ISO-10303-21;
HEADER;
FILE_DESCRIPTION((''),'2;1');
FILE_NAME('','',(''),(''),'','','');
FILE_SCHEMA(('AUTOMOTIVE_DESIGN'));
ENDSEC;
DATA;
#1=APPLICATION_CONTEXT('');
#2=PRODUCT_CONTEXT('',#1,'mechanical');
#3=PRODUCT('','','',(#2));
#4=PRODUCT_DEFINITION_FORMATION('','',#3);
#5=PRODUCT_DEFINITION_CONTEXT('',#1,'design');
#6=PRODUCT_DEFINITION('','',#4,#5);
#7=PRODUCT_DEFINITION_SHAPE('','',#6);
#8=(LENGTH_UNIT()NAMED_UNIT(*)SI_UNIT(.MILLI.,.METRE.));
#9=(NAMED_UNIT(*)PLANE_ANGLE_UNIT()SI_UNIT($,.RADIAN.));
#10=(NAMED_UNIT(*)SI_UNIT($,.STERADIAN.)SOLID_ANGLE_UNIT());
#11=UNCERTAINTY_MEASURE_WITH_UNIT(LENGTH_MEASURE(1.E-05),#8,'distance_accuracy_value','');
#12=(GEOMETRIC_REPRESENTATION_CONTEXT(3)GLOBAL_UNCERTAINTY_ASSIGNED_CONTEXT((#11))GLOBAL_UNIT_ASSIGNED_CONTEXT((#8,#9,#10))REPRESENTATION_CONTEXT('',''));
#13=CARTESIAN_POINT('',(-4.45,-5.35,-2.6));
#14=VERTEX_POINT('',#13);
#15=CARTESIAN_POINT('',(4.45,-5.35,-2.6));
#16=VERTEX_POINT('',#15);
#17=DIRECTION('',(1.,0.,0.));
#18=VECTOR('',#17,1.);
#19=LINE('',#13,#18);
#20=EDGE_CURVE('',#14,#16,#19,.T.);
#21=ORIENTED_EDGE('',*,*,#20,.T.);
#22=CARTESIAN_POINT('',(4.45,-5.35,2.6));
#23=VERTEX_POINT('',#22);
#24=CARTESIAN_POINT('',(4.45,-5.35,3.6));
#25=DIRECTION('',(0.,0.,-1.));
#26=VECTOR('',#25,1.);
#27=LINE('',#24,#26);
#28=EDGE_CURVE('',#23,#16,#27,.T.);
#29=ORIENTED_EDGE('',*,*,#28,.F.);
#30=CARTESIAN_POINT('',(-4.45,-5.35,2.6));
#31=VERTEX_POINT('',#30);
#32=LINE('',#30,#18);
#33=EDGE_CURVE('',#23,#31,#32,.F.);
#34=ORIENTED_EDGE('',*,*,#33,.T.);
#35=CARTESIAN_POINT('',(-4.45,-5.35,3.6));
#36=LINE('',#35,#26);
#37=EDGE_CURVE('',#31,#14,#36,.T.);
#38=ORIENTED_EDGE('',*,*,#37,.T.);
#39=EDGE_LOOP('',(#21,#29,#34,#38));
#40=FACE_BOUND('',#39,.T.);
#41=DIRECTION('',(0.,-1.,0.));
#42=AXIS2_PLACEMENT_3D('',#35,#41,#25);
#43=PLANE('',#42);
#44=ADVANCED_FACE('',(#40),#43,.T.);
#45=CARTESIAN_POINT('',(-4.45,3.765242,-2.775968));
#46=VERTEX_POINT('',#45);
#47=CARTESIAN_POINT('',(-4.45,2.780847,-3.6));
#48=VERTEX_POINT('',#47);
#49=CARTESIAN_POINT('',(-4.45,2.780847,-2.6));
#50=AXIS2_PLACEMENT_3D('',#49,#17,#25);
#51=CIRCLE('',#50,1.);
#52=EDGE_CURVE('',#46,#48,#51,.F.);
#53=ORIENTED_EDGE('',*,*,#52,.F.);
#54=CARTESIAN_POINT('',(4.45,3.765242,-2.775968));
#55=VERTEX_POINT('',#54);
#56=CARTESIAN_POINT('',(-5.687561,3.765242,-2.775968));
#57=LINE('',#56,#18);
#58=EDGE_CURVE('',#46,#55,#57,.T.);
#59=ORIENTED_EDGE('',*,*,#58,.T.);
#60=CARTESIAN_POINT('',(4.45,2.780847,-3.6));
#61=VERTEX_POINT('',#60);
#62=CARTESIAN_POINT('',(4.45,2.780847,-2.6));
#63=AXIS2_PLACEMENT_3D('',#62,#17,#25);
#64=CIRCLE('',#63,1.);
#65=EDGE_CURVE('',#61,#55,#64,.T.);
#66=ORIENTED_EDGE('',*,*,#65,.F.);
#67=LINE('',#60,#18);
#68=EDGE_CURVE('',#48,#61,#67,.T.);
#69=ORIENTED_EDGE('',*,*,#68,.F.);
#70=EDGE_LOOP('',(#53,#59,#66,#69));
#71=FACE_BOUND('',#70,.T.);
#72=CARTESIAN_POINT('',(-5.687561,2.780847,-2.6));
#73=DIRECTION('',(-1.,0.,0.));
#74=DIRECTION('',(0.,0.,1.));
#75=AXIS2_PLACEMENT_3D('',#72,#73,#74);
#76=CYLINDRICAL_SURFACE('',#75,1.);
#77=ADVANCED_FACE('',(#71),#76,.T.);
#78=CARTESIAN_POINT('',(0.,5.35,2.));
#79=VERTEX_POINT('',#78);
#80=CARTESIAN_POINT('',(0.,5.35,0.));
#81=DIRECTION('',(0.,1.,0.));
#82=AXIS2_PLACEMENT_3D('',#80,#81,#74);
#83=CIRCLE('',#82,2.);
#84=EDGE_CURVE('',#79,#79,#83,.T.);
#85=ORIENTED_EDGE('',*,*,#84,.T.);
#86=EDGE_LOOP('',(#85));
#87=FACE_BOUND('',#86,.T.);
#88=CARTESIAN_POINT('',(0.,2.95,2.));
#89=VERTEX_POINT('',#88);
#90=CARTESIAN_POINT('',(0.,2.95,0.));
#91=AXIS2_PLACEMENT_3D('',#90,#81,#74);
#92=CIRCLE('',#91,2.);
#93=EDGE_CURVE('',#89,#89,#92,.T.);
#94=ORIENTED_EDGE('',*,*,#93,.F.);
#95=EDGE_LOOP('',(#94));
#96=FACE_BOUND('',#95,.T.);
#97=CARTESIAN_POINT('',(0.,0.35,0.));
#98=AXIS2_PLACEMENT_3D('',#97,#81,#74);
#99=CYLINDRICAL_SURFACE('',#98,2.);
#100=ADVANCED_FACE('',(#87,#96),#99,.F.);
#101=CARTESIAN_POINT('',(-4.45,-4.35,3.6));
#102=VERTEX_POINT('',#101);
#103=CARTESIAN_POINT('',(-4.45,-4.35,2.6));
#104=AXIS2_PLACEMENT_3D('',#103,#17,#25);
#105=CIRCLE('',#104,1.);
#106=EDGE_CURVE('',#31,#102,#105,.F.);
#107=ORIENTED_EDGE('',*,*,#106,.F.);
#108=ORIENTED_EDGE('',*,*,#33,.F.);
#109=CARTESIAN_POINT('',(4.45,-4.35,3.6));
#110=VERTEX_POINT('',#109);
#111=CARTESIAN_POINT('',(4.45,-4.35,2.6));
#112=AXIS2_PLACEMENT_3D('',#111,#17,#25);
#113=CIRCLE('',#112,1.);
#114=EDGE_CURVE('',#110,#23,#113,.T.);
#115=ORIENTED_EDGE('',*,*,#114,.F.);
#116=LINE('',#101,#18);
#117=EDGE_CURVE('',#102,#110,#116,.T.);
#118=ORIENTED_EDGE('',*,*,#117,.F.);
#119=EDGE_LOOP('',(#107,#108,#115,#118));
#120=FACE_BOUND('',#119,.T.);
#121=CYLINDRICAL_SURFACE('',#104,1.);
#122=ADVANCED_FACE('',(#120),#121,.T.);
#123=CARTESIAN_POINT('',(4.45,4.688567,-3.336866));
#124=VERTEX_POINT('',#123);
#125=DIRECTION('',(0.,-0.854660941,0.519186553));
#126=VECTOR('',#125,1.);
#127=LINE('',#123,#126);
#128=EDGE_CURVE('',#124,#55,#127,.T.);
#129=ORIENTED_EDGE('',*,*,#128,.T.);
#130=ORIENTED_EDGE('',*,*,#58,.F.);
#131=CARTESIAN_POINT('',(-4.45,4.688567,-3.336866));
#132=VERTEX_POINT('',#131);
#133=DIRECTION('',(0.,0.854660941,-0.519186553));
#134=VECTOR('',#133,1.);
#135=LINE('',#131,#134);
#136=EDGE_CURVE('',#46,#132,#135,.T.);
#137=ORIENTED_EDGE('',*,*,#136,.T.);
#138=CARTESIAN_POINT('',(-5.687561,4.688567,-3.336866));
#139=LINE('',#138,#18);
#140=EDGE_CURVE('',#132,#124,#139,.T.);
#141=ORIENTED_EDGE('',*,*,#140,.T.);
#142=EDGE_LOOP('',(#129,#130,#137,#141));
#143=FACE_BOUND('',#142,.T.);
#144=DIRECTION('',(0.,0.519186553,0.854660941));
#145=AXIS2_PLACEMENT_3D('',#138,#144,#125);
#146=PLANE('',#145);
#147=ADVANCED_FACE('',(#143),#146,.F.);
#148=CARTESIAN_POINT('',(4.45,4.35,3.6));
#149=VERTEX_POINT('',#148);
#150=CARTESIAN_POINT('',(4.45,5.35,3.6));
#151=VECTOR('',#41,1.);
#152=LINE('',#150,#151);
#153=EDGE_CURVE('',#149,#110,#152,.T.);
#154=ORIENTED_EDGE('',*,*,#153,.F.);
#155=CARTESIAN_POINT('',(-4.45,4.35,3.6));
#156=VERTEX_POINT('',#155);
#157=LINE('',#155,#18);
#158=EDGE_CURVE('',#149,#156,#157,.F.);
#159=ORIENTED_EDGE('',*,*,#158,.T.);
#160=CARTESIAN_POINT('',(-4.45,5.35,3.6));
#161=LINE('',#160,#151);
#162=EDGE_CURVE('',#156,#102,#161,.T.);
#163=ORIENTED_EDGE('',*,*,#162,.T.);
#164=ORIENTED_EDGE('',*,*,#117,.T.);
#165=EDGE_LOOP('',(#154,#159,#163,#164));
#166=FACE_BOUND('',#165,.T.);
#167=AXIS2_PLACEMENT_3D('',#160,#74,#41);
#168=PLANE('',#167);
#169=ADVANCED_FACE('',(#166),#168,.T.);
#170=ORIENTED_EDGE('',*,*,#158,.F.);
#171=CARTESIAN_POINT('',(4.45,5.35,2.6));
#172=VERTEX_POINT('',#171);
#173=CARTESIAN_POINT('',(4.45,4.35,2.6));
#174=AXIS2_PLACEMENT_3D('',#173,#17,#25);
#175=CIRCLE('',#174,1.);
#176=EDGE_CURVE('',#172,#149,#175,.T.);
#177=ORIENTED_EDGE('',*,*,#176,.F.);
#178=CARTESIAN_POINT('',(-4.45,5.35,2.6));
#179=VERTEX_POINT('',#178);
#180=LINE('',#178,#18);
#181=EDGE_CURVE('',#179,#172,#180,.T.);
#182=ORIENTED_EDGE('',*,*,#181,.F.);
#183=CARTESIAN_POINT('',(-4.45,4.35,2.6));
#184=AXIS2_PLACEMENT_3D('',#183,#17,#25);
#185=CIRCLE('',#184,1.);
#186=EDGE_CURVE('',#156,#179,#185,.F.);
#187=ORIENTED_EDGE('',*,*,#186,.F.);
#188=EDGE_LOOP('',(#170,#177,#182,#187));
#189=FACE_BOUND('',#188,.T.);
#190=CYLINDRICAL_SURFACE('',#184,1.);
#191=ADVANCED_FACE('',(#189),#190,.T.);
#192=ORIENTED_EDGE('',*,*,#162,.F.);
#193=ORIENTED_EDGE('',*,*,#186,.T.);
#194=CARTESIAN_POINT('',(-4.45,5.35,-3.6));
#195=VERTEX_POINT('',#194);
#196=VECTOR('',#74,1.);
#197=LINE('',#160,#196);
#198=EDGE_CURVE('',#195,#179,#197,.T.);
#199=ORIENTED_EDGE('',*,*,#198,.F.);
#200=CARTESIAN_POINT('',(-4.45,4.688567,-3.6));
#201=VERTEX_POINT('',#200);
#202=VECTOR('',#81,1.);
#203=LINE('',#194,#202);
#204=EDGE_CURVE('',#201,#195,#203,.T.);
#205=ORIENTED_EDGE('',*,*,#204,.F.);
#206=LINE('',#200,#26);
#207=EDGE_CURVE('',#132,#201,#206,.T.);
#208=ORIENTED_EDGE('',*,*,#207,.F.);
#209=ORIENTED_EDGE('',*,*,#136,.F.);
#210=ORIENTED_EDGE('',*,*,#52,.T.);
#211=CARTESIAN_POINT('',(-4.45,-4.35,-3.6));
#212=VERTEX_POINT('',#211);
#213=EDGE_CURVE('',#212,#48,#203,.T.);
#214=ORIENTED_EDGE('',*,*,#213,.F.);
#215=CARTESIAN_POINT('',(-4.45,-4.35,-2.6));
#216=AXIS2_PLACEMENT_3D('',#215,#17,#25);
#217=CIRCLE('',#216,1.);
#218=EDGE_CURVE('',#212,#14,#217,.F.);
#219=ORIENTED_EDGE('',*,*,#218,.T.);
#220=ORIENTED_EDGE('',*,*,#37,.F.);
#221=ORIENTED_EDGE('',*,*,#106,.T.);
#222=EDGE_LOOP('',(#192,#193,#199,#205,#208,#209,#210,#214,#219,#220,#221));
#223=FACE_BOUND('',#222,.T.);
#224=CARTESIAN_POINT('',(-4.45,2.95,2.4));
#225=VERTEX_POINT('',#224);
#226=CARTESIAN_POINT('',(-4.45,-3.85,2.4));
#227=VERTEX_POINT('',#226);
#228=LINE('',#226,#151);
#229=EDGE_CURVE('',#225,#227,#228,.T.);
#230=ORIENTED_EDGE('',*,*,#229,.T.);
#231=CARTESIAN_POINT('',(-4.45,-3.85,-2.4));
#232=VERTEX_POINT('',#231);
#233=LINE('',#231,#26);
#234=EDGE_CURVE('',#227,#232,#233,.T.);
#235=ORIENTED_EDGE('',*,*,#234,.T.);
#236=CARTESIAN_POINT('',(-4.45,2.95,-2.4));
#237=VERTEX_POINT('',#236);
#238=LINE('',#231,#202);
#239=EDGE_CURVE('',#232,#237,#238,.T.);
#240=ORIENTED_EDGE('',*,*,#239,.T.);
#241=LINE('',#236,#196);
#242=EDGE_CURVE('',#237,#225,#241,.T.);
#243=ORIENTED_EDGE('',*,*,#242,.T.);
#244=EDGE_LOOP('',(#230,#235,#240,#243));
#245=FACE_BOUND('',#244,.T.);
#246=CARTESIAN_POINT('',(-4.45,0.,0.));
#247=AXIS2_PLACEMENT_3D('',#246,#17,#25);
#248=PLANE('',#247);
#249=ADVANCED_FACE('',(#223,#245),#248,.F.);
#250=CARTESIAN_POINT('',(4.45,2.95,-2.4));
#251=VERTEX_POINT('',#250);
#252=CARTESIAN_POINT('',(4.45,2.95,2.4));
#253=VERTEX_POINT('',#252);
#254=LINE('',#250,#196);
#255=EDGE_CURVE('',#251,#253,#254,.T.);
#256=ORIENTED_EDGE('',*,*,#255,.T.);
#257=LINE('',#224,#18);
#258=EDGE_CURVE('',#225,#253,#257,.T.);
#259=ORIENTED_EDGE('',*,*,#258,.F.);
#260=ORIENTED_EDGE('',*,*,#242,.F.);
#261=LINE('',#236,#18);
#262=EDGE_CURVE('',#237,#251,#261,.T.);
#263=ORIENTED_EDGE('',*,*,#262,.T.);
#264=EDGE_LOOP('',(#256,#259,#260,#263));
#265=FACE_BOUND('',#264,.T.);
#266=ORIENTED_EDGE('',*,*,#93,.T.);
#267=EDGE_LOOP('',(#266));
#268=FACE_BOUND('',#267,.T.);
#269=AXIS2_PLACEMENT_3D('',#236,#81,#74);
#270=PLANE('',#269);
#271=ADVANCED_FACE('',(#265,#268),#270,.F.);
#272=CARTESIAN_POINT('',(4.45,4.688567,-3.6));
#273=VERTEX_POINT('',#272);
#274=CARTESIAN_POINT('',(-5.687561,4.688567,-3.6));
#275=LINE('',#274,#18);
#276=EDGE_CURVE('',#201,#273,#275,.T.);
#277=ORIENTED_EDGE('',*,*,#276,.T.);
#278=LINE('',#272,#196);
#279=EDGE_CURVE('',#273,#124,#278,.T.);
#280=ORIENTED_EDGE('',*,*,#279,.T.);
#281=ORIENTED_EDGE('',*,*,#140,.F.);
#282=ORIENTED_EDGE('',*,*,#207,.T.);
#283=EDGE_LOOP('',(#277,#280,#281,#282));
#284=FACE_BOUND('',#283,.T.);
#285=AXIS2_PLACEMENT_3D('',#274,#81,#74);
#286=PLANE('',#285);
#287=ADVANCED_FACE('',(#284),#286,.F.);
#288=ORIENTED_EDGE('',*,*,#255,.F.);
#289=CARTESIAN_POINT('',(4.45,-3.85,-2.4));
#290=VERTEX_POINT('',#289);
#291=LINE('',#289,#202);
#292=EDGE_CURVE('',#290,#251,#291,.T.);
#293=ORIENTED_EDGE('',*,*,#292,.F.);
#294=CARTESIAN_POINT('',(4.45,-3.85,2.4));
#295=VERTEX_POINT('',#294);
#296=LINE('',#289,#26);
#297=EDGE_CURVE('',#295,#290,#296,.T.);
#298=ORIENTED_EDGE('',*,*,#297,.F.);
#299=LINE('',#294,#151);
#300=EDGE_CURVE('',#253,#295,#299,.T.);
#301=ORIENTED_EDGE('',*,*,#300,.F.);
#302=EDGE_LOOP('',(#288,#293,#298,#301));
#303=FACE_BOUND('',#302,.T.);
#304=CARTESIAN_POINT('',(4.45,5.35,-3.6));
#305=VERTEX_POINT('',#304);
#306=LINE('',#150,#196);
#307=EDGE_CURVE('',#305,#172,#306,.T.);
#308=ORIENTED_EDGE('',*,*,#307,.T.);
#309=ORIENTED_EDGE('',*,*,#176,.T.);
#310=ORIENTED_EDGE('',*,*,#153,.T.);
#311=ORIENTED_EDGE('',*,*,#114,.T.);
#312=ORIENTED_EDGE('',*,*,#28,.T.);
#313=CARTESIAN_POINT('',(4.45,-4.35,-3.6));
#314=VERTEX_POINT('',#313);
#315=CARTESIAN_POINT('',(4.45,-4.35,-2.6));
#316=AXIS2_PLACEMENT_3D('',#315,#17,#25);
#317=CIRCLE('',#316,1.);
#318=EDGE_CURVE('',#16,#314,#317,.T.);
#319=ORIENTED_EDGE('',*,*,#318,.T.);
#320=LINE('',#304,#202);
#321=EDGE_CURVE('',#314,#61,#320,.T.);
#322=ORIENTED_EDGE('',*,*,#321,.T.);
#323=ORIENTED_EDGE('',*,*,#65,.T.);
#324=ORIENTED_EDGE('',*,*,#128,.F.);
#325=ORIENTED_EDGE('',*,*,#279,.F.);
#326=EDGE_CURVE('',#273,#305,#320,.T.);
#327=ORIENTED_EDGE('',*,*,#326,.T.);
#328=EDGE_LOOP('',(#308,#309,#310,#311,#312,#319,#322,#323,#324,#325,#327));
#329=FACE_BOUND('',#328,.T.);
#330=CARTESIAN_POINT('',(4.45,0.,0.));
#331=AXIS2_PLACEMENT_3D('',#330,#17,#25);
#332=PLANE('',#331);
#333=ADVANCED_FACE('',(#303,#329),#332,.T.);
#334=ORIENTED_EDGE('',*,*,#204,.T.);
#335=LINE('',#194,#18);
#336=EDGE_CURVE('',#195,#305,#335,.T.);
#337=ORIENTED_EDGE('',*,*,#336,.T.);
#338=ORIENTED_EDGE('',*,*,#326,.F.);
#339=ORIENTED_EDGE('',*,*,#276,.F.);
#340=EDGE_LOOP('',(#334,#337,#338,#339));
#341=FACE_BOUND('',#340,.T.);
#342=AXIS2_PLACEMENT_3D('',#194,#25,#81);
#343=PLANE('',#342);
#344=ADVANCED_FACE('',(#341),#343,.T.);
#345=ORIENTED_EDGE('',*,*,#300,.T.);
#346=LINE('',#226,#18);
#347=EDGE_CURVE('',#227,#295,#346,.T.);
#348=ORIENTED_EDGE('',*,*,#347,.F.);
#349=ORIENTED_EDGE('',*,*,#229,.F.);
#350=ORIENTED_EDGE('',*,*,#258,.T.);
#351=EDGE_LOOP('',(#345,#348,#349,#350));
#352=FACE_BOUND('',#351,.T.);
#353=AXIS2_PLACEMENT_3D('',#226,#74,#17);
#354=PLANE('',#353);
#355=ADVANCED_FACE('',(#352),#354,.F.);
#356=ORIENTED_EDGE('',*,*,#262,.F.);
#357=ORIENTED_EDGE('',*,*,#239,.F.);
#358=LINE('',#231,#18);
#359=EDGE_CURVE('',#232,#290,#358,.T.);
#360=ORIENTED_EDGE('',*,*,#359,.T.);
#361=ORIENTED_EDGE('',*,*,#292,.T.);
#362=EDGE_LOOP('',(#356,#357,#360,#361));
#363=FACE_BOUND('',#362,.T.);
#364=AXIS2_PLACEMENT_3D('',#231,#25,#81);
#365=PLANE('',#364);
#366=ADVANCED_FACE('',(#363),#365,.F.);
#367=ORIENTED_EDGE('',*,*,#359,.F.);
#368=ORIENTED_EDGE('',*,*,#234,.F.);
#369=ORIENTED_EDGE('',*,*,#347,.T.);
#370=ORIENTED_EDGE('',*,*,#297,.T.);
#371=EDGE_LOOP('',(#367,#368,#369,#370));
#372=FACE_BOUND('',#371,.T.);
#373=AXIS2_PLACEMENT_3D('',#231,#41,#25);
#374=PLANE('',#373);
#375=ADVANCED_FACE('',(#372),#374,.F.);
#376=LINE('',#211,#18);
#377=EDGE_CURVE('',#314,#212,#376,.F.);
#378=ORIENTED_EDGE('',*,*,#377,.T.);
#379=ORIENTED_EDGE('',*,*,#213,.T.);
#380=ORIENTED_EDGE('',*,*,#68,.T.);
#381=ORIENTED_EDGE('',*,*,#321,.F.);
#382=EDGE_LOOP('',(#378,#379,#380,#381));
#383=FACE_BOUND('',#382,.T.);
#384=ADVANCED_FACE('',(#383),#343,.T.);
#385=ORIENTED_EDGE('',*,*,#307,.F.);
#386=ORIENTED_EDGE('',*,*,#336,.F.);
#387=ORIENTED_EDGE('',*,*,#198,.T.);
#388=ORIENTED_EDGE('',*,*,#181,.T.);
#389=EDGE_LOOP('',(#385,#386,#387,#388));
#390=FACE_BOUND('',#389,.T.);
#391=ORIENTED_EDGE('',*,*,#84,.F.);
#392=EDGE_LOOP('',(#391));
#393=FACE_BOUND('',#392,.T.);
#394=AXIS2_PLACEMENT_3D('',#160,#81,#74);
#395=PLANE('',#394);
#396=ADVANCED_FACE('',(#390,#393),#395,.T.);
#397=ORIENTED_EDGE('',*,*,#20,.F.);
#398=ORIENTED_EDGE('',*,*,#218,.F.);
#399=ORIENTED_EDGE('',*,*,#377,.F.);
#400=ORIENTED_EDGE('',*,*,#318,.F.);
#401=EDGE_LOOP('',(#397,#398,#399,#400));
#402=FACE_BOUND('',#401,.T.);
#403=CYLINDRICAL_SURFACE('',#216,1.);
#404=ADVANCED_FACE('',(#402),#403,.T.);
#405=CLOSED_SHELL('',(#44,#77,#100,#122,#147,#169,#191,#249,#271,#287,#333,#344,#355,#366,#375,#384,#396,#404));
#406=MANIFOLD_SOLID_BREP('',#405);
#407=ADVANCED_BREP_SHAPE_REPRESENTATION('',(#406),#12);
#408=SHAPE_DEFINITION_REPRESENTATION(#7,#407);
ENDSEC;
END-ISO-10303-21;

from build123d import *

# Parameters (mm, degrees)
EXTRUDE_1_DEPTH      = 4.45
EXTRUDE_1_DEPTH_BACK = 4.45
SKETCH_1_W           = 7.2
SKETCH_1_H           = 10.7
SKETCH_1_W_2         = 4.8
SKETCH_1_H_2         = 6.8
SKETCH_2_R           = 2
CUT_EXTRUDE_1_DEPTH  = 5
CUT_EXTRUDE_2_DEPTH  = 8.9
FILLET_1_R           = 1


with BuildPart() as part:
    # 草图1 → 凸台-拉伸1 (new, two sides: drawn at the far end of the back side and taken through both)
    with BuildSketch(Plane(origin=(0, 0, 0), x_dir=(0, 0, -1), z_dir=(1, 0, 0)).offset(-EXTRUDE_1_DEPTH_BACK)):
        Rectangle(SKETCH_1_W, SKETCH_1_H)
        with Locations((0, -0.45)):
            Rectangle(SKETCH_1_W_2, SKETCH_1_H_2, mode=Mode.SUBTRACT)
    extrude(amount=EXTRUDE_1_DEPTH + EXTRUDE_1_DEPTH_BACK)

    # 草图2 → 切除-拉伸1 (cut)
    with BuildSketch(Plane(origin=(0, 5.35, 0), x_dir=(1, 0, 0), z_dir=(0, 1, 0))):
        with Locations(Location((0, 0, 0), (0, 0, 270))):
            Circle(SKETCH_2_R)
    extrude(amount=-CUT_EXTRUDE_1_DEPTH, mode=Mode.SUBTRACT)

    # 草图3 → 切除-拉伸2 (cut)
    with BuildSketch(Plane(origin=(4.45, 0, 0), x_dir=(0, 0, -1), z_dir=(1, 0, 0))):
        Polygon((3.6, 4.688566818), (3.336866457, 4.688566818), (2.775968401, 3.765242325), (3.6, 3.765242325), align=None)
    extrude(amount=-CUT_EXTRUDE_2_DEPTH, mode=Mode.SUBTRACT)

    # 圆角1
    # the kernel refuses this fillet: 1 mm, written as the material it takes off along each edge
    with BuildSketch(Plane(origin=(6.95, -5.35, -3.6), x_dir=(0, 0, 1), z_dir=(-1, 0, 0))) as fillet_1_piece_1:
        with BuildLine():
            CenterArc((FILLET_1_R, FILLET_1_R), FILLET_1_R, 180, 90)
            Line((0, FILLET_1_R), (-FILLET_1_R * 0.02, FILLET_1_R))
            Line((-FILLET_1_R * 0.02, FILLET_1_R), (-FILLET_1_R * 0.02, -FILLET_1_R * 0.02))
            Line((-FILLET_1_R * 0.02, -FILLET_1_R * 0.02), (FILLET_1_R, -FILLET_1_R * 0.02))
            Line((FILLET_1_R, -FILLET_1_R * 0.02), (FILLET_1_R, 0))
        make_face()
    extrude(amount=13.9, mode=Mode.SUBTRACT)
    with BuildSketch(Plane(origin=(-6.95, -5.35, 3.6), x_dir=(0, 1, 0), z_dir=(1, 0, 0)), Plane(origin=(-6.95, 5.35, 3.6), x_dir=(0, 0, -1), z_dir=(1, 0, 0))) as fillet_1_piece_2:
        with BuildLine():
            CenterArc((FILLET_1_R, -FILLET_1_R), FILLET_1_R, 90, 90)
            Line((0, -FILLET_1_R), (-FILLET_1_R * 0.02, -FILLET_1_R))
            Line((-FILLET_1_R * 0.02, -FILLET_1_R), (-FILLET_1_R * 0.02, FILLET_1_R * 0.02))
            Line((-FILLET_1_R * 0.02, FILLET_1_R * 0.02), (FILLET_1_R, FILLET_1_R * 0.02))
            Line((FILLET_1_R, FILLET_1_R * 0.02), (FILLET_1_R, 0))
        make_face()
    extrude(amount=13.9, mode=Mode.SUBTRACT)
    with BuildSketch(Plane(origin=(6.910989539, 3.765242325, -3.6), x_dir=(0, -1, 0), z_dir=(-1, 0, 0))) as fillet_1_piece_3_section:
        with BuildLine():
            CenterArc((0.984395816, 1), FILLET_1_R, 190.135017985, 79.864982015)
            Line((0, 0.824031599), (-0.019687916, 0.820512231))
            ThreePointArc((-0.019687916, 0.820512231), (-0.02, 0.412015799), (-0.02, 0))
            Line((-0.02, 0), (0, -0.02))
            Line((0, -0.02), (0.984395816, -0.02))
            Line((0.984395816, -0.02), (0.984395816, 0))
        make_face()
    fillet_1_piece_3 = extrude(amount=13.821979078, mode=Mode.PRIVATE)
    fillet_1_piece_3 = split(fillet_1_piece_3, bisect_by=Plane(origin=(0, 3.873370959, -2.84165402), z_dir=(0, -0.5191865527287748, -0.8546609406458278)), keep=Keep.TOP, mode=Mode.PRIVATE)
    add(fillet_1_piece_3, mode=Mode.SUBTRACT)


solid = part.part
